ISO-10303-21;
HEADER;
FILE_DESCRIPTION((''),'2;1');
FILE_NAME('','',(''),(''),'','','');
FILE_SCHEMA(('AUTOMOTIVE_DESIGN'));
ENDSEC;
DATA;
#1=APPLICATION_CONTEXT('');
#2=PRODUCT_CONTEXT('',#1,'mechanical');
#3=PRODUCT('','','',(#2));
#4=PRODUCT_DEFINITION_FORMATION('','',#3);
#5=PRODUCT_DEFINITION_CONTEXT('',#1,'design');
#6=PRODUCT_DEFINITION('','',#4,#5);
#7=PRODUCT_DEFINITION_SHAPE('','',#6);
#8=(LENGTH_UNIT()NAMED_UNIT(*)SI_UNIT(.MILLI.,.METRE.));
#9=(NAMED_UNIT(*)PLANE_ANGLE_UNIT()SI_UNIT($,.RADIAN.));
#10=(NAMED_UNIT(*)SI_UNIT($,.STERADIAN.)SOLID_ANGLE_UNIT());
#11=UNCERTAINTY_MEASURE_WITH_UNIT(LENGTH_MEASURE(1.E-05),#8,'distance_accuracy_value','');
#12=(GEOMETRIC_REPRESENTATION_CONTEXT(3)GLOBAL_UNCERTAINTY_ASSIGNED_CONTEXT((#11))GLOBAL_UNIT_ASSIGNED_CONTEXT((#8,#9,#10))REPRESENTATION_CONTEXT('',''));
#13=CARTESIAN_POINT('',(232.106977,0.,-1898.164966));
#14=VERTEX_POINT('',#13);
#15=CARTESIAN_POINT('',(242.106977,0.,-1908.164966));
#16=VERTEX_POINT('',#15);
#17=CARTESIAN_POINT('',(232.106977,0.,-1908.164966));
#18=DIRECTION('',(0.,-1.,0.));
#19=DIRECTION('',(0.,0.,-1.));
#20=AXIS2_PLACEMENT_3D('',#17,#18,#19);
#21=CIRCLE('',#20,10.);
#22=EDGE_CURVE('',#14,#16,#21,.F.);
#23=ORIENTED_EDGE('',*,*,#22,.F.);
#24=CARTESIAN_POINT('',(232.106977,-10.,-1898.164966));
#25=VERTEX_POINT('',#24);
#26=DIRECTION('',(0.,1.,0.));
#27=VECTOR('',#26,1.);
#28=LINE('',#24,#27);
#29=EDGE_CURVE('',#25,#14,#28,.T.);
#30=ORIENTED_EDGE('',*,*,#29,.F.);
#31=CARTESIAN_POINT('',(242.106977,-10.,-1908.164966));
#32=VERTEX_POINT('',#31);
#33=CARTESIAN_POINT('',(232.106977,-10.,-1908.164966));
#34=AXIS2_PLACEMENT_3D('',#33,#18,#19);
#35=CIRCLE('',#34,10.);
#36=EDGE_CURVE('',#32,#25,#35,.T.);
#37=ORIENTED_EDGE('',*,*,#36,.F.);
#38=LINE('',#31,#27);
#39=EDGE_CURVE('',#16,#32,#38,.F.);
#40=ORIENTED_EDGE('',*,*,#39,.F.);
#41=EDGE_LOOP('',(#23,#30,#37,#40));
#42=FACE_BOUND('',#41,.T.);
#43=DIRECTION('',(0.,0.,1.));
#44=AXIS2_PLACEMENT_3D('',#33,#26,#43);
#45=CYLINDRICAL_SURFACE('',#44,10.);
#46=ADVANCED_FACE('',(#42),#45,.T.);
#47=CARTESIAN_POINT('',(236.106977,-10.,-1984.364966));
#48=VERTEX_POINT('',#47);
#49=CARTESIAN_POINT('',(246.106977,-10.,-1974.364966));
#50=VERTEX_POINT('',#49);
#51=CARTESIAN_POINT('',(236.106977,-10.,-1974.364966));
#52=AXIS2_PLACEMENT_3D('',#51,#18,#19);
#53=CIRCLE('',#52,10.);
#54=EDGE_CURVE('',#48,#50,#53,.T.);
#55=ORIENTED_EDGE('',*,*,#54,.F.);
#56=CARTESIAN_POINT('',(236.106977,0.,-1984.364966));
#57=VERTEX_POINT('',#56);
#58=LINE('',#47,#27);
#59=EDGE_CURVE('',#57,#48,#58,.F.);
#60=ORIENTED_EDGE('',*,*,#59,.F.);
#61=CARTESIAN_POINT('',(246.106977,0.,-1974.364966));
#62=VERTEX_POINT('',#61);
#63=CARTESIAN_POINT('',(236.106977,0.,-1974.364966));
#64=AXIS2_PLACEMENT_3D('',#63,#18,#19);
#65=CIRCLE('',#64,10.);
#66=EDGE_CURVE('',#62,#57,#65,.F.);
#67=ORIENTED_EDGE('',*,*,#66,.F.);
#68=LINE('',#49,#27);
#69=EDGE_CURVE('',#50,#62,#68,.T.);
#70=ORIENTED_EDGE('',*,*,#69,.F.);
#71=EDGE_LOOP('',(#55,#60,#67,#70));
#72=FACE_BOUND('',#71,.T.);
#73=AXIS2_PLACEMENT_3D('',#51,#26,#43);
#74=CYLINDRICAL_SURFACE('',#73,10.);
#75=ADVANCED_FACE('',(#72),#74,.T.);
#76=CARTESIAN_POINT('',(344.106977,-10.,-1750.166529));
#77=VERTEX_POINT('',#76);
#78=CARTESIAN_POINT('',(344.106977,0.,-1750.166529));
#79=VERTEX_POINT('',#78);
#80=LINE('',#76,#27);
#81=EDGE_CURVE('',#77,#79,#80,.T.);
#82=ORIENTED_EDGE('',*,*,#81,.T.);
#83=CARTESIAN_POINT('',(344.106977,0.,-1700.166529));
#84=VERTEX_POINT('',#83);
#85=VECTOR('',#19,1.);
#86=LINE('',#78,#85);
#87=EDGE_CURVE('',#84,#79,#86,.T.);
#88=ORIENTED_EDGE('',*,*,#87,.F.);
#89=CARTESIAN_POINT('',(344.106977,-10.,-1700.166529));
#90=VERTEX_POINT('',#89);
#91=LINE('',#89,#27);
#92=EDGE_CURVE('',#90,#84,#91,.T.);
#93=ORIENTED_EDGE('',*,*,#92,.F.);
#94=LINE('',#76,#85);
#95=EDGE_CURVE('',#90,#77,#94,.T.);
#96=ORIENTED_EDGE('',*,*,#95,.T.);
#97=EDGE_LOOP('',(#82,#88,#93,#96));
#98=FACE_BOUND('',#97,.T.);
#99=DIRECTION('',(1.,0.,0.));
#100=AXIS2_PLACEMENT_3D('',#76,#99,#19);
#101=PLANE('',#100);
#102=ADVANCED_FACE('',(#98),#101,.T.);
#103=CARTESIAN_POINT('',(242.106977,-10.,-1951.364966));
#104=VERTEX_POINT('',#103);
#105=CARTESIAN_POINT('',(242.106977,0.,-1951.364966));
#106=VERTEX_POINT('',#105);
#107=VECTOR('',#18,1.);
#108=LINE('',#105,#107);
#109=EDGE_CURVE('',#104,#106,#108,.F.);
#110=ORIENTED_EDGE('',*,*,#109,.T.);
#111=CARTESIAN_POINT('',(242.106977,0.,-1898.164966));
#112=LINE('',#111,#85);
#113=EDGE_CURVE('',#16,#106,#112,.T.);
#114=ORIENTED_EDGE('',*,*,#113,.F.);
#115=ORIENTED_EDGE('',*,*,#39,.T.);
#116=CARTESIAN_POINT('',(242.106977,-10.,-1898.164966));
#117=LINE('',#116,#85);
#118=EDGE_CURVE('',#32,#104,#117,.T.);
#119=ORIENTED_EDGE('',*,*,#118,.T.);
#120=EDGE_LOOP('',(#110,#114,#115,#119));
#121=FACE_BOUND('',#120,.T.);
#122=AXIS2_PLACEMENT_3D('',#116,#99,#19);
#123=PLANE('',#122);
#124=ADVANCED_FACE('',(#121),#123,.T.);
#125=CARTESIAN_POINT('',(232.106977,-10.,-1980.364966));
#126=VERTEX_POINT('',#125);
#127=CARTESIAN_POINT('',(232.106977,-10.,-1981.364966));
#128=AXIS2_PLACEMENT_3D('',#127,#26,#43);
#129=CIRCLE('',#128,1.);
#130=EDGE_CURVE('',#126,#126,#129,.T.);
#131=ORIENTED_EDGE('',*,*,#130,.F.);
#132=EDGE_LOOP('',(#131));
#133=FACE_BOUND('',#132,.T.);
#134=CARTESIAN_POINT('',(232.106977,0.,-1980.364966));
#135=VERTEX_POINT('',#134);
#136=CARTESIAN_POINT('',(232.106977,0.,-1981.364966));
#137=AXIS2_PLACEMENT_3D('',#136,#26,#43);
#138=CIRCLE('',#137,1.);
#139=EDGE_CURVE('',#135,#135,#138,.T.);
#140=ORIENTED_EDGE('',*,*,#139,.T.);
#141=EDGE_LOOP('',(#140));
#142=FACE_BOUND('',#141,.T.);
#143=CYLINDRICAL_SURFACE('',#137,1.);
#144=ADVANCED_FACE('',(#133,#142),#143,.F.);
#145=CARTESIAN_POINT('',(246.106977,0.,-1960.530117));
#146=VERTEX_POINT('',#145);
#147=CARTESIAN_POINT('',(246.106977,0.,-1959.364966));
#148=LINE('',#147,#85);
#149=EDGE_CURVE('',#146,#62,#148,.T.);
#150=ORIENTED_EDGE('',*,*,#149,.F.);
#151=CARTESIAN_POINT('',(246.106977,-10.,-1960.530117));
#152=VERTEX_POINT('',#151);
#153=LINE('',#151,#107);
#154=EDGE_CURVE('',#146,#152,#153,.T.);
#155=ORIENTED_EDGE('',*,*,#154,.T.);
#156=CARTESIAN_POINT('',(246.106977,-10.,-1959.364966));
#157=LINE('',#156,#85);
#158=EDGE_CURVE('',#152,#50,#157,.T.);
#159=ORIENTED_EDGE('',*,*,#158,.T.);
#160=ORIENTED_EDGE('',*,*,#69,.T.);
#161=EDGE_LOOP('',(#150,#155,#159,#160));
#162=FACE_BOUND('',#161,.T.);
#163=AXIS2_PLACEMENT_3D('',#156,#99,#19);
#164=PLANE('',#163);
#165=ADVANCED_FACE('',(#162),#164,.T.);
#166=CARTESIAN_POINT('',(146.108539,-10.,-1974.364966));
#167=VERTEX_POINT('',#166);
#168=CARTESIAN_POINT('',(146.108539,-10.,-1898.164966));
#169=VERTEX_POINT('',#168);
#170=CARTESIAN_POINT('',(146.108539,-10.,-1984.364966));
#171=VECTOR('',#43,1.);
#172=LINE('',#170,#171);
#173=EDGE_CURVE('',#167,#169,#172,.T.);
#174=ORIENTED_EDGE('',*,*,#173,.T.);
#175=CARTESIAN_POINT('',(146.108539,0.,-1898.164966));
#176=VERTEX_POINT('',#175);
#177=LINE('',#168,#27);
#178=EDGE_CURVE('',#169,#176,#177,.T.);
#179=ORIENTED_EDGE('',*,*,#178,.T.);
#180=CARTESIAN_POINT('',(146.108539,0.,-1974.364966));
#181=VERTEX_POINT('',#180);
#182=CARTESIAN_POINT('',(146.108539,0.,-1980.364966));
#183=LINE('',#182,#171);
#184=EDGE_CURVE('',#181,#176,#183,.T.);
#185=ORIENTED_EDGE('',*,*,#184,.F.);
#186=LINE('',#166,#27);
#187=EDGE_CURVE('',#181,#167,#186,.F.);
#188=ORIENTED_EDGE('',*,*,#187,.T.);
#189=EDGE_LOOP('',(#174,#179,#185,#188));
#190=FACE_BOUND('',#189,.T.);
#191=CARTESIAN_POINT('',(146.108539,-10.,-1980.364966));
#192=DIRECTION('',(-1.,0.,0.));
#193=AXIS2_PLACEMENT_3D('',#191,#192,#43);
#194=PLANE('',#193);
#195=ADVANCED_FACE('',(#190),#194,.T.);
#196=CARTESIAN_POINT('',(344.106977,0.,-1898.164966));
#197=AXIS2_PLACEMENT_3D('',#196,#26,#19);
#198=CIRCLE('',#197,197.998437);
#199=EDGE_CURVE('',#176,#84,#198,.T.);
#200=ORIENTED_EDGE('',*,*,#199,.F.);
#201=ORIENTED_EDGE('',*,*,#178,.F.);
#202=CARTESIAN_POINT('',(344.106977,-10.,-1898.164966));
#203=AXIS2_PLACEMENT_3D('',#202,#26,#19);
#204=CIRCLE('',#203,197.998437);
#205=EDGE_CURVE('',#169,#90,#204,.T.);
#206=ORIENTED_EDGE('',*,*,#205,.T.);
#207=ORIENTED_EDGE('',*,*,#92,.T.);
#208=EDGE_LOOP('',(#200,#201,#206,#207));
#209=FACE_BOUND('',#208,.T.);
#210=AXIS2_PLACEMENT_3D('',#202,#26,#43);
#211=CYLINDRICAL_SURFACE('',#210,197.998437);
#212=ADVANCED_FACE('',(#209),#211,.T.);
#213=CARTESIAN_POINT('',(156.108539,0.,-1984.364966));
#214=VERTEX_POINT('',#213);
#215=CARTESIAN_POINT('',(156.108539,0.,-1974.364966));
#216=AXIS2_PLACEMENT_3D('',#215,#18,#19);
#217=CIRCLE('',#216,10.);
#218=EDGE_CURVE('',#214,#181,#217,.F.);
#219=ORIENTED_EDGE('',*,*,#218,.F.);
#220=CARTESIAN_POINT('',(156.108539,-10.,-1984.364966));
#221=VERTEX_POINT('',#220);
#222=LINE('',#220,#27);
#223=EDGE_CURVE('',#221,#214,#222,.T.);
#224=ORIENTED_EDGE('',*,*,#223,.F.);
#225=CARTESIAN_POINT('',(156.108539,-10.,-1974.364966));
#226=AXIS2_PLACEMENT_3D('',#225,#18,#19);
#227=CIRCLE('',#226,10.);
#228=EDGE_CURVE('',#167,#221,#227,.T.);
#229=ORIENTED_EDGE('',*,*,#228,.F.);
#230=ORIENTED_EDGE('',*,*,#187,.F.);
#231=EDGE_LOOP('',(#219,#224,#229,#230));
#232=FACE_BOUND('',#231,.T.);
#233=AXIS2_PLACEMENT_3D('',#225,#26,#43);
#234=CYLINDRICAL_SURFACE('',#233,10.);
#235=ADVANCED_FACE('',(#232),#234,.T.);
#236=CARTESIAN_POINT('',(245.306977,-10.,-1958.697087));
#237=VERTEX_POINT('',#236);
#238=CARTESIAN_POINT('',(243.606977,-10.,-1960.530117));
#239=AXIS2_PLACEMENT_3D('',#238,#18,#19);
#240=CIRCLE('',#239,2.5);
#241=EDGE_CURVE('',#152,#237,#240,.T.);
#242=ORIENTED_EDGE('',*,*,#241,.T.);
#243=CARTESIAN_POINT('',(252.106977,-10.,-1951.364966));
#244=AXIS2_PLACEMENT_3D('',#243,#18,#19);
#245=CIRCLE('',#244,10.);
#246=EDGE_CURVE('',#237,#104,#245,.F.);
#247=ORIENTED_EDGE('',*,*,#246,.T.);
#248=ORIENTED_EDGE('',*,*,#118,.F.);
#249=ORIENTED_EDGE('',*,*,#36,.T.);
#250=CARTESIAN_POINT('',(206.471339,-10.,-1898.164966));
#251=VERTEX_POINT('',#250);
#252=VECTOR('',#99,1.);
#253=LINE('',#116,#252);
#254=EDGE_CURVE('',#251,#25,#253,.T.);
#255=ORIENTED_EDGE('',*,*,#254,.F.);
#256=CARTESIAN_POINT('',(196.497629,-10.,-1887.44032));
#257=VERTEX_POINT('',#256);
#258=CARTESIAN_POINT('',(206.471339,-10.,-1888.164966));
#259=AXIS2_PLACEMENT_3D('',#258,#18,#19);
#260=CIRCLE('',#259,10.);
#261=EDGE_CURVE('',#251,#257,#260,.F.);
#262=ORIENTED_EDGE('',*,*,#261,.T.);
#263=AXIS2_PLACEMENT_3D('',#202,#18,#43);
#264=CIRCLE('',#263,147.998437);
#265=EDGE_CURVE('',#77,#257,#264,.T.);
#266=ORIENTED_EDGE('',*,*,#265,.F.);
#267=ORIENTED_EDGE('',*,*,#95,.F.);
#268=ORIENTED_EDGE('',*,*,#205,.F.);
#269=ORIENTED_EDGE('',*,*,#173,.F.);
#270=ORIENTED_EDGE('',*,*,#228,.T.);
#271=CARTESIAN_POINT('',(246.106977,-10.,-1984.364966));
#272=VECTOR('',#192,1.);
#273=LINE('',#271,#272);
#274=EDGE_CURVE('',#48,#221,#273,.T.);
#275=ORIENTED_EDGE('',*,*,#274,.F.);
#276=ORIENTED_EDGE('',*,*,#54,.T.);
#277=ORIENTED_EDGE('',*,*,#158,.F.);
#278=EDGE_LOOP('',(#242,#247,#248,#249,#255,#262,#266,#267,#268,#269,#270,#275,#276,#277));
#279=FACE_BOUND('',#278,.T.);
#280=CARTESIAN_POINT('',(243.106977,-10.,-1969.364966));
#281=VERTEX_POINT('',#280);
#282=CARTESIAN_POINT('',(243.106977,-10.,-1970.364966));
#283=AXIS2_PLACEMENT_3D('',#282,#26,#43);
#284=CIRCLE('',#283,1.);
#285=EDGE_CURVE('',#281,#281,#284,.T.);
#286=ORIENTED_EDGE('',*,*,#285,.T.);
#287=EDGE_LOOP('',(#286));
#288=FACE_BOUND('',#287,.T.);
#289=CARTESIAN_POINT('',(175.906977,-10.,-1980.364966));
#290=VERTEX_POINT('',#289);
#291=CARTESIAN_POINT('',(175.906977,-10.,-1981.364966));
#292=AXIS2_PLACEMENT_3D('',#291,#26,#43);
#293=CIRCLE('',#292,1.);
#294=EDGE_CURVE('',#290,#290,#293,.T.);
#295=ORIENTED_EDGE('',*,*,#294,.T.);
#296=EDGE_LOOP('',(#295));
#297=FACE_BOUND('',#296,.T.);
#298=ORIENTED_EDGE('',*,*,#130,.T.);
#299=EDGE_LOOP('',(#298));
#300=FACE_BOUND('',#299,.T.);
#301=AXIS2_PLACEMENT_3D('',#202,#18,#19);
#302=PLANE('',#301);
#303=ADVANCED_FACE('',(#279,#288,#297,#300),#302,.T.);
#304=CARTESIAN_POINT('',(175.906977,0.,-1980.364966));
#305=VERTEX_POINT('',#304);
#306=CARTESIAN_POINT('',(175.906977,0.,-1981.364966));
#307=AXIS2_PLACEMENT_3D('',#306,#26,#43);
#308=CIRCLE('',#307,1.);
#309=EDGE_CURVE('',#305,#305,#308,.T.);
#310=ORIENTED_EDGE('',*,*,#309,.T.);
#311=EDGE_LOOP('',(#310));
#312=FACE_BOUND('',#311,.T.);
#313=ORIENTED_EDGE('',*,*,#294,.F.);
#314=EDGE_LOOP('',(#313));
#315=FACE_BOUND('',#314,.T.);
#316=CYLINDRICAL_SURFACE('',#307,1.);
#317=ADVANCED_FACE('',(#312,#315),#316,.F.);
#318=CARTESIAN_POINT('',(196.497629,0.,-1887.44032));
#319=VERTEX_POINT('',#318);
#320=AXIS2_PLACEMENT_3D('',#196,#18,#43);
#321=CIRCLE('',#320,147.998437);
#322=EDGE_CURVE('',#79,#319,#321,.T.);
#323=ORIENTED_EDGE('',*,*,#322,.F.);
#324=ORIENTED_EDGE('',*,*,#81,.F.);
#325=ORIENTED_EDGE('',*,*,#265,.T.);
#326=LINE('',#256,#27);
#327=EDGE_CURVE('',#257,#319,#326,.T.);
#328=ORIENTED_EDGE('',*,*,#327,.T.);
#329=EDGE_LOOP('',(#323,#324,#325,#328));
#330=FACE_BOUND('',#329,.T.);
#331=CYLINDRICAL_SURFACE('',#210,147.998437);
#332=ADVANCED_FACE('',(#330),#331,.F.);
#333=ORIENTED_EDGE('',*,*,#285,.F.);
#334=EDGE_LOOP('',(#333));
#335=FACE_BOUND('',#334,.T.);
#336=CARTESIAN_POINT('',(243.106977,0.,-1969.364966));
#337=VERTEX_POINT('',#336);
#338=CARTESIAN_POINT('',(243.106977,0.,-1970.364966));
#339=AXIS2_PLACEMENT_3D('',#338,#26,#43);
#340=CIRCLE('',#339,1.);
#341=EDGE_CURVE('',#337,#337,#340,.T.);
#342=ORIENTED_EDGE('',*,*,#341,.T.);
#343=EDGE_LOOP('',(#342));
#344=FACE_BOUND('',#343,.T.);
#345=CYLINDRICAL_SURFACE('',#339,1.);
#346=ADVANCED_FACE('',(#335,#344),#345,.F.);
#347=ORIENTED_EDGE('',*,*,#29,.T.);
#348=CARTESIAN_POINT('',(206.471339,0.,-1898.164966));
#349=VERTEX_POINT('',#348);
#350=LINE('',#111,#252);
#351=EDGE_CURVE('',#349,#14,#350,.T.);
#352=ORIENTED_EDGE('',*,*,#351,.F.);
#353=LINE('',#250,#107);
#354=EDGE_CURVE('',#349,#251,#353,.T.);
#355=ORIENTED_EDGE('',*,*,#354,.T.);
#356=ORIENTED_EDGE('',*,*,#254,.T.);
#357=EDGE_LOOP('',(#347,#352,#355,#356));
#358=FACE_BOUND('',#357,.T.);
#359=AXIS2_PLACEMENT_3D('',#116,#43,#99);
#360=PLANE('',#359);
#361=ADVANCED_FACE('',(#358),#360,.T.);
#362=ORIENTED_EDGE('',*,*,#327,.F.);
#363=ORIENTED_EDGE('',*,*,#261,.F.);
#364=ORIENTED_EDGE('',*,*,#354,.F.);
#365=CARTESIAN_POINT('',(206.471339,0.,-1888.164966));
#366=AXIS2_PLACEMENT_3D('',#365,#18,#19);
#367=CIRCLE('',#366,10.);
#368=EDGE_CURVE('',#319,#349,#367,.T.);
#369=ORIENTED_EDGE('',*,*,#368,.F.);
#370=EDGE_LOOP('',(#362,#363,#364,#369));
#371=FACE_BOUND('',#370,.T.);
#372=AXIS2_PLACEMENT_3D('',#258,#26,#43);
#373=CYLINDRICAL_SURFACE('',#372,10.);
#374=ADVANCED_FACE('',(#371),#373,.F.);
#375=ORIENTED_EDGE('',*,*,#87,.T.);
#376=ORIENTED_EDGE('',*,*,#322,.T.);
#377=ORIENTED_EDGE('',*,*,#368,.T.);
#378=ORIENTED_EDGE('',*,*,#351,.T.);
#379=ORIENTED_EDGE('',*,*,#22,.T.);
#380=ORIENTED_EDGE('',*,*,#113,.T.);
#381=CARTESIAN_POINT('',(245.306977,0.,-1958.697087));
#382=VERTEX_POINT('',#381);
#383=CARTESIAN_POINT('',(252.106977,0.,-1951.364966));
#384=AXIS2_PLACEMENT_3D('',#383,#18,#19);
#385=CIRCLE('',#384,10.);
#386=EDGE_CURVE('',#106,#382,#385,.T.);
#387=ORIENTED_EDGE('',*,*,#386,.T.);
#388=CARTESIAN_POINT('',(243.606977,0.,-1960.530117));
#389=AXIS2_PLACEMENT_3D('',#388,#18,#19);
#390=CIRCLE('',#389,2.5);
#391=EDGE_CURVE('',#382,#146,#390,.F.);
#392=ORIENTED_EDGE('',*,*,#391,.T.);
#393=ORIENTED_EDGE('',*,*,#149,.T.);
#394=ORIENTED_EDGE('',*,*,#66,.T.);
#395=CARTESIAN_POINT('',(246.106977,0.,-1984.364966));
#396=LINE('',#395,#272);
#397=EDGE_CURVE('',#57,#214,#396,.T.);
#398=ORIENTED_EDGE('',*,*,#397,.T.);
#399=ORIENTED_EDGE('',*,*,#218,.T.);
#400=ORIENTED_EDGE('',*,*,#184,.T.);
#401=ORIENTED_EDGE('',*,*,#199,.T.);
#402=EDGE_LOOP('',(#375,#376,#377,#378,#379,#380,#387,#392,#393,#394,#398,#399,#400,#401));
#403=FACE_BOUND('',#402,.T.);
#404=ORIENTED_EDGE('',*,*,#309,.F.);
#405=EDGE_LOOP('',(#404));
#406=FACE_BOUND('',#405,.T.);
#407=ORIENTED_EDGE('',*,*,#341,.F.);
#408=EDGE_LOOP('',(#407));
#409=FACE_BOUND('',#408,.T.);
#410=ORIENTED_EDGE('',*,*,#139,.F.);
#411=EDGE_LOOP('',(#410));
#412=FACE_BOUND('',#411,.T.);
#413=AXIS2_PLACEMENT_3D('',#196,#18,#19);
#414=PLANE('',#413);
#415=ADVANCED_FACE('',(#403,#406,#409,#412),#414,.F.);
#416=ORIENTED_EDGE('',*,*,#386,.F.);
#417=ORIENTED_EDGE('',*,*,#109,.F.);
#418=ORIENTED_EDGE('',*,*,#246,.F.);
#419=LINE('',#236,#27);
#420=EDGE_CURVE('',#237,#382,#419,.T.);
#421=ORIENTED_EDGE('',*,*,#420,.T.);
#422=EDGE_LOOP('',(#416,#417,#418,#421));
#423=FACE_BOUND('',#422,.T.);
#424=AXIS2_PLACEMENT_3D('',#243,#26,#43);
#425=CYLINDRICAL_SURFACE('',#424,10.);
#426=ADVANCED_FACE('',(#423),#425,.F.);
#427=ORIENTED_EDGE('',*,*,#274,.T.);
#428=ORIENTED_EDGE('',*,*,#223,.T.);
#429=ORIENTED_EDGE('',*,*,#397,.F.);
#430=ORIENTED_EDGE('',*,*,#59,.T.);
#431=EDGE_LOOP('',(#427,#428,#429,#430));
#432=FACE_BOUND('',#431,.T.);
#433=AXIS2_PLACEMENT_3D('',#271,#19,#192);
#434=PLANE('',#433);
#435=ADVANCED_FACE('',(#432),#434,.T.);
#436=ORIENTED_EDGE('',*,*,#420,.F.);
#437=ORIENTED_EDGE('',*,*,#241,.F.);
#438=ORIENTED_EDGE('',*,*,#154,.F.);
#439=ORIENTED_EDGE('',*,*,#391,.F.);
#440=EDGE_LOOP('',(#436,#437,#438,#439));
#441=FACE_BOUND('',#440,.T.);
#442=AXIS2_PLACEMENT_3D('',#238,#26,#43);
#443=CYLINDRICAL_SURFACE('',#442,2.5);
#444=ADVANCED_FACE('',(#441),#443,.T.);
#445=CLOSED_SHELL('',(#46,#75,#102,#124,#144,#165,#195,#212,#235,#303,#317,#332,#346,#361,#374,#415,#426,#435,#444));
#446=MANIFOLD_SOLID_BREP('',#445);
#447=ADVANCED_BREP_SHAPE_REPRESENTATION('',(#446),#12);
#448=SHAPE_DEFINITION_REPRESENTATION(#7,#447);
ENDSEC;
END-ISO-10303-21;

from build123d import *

# Parameters (mm, degrees)
BOSS_EXTRUDE1_DEPTH   = 10
F_2_0MM_DOWEL_HOLE1_D = 2
FILLET1_R             = 10
FILLET2_R             = 2.5


with BuildPart() as part:
    # Sketch1 → Boss-Extrude1 (new body)
    with BuildSketch(Plane(origin=(0, 0, 0), x_dir=(1, 0, 0), z_dir=(0, 1, 0))):
        with BuildLine():
            Line((146.108539292, 1980.364966037), (146.108539292, 1898.164966235))
            ThreePointArc((146.108539292, 1898.164966235), (204.100938953, 1758.158928457), (344.106976731, 1700.166528796))
            Line((344.106976731, 1700.166528796), (344.106976731, 1750.166528796))
            ThreePointArc((344.106976731, 1750.166528796), (239.456278012, 1793.514267516), (196.108539292, 1898.164966235))
            Line((196.108539292, 1898.164966235), (242.106976731, 1898.164966235))
            Line((242.106976731, 1898.164966235), (242.106976731, 1959.364966037))
            Line((242.106976731, 1959.364966037), (246.106976731, 1959.364966037))
            Line((246.106976731, 1959.364966037), (246.106976731, 1984.364966037))
            Line((246.106976731, 1984.364966037), (146.108539292, 1984.364966037))
            Line((146.108539292, 1984.364966037), (146.108539292, 1980.364966037))
        make_face()
    extrude(amount=-BOSS_EXTRUDE1_DEPTH)

    # Ø2.0mm Dowel Hole1 (through all)
    with Locations(Plane(origin=(0, 0, 0), x_dir=(1, 0, 0), z_dir=(0, 1, 0))):
        with Locations((175.906976731, 1981.364966037), (232.106976731, 1981.364966037), (243.106976731, 1970.364966037)):
            Hole(F_2_0MM_DOWEL_HOLE1_D / 2)

    # Fillet1
    # the kernel refuses this fillet: 10 mm, written as the material it adds along each edge
    with BuildSketch(Plane(origin=(196.108539292, 0, -1898.164966235), x_dir=(0.03625613161983894, 0, 0.9993425303267969), z_dir=(0, -1, 0))) as fillet1_piece_1:
        with BuildLine():
            CenterArc((10.369140338, -9.993425303), FILLET1_R, 87.922221298, 94.155557404)
            Line((0.375715035, -10.355986619), (0, 0))
            ThreePointArc((0, 0), (5.365850827, 0.097304484), (10.731701655, 0))
        make_face()
    extrude(amount=10)
    with BuildSketch(Plane(origin=(242.106976731, 0, -1959.364966037), x_dir=(1, 0, 0), z_dir=(0, -1, 0))) as fillet1_piece_2:
        with BuildLine():
            CenterArc((10, 8), FILLET1_R, 180, 53.130102354)
            Line((0, 8), (0, 0))
            Line((0, 0), (4, 0))
        make_face()
    extrude(amount=10)
    # the kernel refuses this fillet: 10 mm, written as the material it takes off along each edge
    with BuildSketch(Plane(origin=(146.108539292, 25, -1984.364966037), x_dir=(0, 0, 1), z_dir=(0, -1, 0)), Plane(origin=(246.106976731, 25, -1984.364966037), x_dir=(-1, 0, 0), z_dir=(0, -1, 0))) as fillet1_2_piece_1:
        with BuildLine():
            CenterArc((FILLET1_R, -FILLET1_R), FILLET1_R, 90, 90)
            Line((0, -FILLET1_R), (0, 0))
            Line((0, 0), (FILLET1_R, 0))
        make_face()
    extrude(amount=60, mode=Mode.SUBTRACT)
    with BuildSketch(Plane(origin=(242.106976731, 25, -1898.164966235), x_dir=(-1, 0, 0), z_dir=(0, -1, 0))) as fillet1_2_piece_2:
        with BuildLine():
            CenterArc((FILLET1_R, FILLET1_R), FILLET1_R, 180, 90)
            Line((0, FILLET1_R), (0, 0))
            Line((0, 0), (FILLET1_R, 0))
        make_face()
    extrude(amount=60, mode=Mode.SUBTRACT)

    # Fillet2
    fillet2_edges = [part.edges().sort_by_distance(p)[0] for p in [
        (246.106976731, -5, -1959.364966037),
    ]]
    fillet(fillet2_edges, radius=FILLET2_R)


solid = part.part
